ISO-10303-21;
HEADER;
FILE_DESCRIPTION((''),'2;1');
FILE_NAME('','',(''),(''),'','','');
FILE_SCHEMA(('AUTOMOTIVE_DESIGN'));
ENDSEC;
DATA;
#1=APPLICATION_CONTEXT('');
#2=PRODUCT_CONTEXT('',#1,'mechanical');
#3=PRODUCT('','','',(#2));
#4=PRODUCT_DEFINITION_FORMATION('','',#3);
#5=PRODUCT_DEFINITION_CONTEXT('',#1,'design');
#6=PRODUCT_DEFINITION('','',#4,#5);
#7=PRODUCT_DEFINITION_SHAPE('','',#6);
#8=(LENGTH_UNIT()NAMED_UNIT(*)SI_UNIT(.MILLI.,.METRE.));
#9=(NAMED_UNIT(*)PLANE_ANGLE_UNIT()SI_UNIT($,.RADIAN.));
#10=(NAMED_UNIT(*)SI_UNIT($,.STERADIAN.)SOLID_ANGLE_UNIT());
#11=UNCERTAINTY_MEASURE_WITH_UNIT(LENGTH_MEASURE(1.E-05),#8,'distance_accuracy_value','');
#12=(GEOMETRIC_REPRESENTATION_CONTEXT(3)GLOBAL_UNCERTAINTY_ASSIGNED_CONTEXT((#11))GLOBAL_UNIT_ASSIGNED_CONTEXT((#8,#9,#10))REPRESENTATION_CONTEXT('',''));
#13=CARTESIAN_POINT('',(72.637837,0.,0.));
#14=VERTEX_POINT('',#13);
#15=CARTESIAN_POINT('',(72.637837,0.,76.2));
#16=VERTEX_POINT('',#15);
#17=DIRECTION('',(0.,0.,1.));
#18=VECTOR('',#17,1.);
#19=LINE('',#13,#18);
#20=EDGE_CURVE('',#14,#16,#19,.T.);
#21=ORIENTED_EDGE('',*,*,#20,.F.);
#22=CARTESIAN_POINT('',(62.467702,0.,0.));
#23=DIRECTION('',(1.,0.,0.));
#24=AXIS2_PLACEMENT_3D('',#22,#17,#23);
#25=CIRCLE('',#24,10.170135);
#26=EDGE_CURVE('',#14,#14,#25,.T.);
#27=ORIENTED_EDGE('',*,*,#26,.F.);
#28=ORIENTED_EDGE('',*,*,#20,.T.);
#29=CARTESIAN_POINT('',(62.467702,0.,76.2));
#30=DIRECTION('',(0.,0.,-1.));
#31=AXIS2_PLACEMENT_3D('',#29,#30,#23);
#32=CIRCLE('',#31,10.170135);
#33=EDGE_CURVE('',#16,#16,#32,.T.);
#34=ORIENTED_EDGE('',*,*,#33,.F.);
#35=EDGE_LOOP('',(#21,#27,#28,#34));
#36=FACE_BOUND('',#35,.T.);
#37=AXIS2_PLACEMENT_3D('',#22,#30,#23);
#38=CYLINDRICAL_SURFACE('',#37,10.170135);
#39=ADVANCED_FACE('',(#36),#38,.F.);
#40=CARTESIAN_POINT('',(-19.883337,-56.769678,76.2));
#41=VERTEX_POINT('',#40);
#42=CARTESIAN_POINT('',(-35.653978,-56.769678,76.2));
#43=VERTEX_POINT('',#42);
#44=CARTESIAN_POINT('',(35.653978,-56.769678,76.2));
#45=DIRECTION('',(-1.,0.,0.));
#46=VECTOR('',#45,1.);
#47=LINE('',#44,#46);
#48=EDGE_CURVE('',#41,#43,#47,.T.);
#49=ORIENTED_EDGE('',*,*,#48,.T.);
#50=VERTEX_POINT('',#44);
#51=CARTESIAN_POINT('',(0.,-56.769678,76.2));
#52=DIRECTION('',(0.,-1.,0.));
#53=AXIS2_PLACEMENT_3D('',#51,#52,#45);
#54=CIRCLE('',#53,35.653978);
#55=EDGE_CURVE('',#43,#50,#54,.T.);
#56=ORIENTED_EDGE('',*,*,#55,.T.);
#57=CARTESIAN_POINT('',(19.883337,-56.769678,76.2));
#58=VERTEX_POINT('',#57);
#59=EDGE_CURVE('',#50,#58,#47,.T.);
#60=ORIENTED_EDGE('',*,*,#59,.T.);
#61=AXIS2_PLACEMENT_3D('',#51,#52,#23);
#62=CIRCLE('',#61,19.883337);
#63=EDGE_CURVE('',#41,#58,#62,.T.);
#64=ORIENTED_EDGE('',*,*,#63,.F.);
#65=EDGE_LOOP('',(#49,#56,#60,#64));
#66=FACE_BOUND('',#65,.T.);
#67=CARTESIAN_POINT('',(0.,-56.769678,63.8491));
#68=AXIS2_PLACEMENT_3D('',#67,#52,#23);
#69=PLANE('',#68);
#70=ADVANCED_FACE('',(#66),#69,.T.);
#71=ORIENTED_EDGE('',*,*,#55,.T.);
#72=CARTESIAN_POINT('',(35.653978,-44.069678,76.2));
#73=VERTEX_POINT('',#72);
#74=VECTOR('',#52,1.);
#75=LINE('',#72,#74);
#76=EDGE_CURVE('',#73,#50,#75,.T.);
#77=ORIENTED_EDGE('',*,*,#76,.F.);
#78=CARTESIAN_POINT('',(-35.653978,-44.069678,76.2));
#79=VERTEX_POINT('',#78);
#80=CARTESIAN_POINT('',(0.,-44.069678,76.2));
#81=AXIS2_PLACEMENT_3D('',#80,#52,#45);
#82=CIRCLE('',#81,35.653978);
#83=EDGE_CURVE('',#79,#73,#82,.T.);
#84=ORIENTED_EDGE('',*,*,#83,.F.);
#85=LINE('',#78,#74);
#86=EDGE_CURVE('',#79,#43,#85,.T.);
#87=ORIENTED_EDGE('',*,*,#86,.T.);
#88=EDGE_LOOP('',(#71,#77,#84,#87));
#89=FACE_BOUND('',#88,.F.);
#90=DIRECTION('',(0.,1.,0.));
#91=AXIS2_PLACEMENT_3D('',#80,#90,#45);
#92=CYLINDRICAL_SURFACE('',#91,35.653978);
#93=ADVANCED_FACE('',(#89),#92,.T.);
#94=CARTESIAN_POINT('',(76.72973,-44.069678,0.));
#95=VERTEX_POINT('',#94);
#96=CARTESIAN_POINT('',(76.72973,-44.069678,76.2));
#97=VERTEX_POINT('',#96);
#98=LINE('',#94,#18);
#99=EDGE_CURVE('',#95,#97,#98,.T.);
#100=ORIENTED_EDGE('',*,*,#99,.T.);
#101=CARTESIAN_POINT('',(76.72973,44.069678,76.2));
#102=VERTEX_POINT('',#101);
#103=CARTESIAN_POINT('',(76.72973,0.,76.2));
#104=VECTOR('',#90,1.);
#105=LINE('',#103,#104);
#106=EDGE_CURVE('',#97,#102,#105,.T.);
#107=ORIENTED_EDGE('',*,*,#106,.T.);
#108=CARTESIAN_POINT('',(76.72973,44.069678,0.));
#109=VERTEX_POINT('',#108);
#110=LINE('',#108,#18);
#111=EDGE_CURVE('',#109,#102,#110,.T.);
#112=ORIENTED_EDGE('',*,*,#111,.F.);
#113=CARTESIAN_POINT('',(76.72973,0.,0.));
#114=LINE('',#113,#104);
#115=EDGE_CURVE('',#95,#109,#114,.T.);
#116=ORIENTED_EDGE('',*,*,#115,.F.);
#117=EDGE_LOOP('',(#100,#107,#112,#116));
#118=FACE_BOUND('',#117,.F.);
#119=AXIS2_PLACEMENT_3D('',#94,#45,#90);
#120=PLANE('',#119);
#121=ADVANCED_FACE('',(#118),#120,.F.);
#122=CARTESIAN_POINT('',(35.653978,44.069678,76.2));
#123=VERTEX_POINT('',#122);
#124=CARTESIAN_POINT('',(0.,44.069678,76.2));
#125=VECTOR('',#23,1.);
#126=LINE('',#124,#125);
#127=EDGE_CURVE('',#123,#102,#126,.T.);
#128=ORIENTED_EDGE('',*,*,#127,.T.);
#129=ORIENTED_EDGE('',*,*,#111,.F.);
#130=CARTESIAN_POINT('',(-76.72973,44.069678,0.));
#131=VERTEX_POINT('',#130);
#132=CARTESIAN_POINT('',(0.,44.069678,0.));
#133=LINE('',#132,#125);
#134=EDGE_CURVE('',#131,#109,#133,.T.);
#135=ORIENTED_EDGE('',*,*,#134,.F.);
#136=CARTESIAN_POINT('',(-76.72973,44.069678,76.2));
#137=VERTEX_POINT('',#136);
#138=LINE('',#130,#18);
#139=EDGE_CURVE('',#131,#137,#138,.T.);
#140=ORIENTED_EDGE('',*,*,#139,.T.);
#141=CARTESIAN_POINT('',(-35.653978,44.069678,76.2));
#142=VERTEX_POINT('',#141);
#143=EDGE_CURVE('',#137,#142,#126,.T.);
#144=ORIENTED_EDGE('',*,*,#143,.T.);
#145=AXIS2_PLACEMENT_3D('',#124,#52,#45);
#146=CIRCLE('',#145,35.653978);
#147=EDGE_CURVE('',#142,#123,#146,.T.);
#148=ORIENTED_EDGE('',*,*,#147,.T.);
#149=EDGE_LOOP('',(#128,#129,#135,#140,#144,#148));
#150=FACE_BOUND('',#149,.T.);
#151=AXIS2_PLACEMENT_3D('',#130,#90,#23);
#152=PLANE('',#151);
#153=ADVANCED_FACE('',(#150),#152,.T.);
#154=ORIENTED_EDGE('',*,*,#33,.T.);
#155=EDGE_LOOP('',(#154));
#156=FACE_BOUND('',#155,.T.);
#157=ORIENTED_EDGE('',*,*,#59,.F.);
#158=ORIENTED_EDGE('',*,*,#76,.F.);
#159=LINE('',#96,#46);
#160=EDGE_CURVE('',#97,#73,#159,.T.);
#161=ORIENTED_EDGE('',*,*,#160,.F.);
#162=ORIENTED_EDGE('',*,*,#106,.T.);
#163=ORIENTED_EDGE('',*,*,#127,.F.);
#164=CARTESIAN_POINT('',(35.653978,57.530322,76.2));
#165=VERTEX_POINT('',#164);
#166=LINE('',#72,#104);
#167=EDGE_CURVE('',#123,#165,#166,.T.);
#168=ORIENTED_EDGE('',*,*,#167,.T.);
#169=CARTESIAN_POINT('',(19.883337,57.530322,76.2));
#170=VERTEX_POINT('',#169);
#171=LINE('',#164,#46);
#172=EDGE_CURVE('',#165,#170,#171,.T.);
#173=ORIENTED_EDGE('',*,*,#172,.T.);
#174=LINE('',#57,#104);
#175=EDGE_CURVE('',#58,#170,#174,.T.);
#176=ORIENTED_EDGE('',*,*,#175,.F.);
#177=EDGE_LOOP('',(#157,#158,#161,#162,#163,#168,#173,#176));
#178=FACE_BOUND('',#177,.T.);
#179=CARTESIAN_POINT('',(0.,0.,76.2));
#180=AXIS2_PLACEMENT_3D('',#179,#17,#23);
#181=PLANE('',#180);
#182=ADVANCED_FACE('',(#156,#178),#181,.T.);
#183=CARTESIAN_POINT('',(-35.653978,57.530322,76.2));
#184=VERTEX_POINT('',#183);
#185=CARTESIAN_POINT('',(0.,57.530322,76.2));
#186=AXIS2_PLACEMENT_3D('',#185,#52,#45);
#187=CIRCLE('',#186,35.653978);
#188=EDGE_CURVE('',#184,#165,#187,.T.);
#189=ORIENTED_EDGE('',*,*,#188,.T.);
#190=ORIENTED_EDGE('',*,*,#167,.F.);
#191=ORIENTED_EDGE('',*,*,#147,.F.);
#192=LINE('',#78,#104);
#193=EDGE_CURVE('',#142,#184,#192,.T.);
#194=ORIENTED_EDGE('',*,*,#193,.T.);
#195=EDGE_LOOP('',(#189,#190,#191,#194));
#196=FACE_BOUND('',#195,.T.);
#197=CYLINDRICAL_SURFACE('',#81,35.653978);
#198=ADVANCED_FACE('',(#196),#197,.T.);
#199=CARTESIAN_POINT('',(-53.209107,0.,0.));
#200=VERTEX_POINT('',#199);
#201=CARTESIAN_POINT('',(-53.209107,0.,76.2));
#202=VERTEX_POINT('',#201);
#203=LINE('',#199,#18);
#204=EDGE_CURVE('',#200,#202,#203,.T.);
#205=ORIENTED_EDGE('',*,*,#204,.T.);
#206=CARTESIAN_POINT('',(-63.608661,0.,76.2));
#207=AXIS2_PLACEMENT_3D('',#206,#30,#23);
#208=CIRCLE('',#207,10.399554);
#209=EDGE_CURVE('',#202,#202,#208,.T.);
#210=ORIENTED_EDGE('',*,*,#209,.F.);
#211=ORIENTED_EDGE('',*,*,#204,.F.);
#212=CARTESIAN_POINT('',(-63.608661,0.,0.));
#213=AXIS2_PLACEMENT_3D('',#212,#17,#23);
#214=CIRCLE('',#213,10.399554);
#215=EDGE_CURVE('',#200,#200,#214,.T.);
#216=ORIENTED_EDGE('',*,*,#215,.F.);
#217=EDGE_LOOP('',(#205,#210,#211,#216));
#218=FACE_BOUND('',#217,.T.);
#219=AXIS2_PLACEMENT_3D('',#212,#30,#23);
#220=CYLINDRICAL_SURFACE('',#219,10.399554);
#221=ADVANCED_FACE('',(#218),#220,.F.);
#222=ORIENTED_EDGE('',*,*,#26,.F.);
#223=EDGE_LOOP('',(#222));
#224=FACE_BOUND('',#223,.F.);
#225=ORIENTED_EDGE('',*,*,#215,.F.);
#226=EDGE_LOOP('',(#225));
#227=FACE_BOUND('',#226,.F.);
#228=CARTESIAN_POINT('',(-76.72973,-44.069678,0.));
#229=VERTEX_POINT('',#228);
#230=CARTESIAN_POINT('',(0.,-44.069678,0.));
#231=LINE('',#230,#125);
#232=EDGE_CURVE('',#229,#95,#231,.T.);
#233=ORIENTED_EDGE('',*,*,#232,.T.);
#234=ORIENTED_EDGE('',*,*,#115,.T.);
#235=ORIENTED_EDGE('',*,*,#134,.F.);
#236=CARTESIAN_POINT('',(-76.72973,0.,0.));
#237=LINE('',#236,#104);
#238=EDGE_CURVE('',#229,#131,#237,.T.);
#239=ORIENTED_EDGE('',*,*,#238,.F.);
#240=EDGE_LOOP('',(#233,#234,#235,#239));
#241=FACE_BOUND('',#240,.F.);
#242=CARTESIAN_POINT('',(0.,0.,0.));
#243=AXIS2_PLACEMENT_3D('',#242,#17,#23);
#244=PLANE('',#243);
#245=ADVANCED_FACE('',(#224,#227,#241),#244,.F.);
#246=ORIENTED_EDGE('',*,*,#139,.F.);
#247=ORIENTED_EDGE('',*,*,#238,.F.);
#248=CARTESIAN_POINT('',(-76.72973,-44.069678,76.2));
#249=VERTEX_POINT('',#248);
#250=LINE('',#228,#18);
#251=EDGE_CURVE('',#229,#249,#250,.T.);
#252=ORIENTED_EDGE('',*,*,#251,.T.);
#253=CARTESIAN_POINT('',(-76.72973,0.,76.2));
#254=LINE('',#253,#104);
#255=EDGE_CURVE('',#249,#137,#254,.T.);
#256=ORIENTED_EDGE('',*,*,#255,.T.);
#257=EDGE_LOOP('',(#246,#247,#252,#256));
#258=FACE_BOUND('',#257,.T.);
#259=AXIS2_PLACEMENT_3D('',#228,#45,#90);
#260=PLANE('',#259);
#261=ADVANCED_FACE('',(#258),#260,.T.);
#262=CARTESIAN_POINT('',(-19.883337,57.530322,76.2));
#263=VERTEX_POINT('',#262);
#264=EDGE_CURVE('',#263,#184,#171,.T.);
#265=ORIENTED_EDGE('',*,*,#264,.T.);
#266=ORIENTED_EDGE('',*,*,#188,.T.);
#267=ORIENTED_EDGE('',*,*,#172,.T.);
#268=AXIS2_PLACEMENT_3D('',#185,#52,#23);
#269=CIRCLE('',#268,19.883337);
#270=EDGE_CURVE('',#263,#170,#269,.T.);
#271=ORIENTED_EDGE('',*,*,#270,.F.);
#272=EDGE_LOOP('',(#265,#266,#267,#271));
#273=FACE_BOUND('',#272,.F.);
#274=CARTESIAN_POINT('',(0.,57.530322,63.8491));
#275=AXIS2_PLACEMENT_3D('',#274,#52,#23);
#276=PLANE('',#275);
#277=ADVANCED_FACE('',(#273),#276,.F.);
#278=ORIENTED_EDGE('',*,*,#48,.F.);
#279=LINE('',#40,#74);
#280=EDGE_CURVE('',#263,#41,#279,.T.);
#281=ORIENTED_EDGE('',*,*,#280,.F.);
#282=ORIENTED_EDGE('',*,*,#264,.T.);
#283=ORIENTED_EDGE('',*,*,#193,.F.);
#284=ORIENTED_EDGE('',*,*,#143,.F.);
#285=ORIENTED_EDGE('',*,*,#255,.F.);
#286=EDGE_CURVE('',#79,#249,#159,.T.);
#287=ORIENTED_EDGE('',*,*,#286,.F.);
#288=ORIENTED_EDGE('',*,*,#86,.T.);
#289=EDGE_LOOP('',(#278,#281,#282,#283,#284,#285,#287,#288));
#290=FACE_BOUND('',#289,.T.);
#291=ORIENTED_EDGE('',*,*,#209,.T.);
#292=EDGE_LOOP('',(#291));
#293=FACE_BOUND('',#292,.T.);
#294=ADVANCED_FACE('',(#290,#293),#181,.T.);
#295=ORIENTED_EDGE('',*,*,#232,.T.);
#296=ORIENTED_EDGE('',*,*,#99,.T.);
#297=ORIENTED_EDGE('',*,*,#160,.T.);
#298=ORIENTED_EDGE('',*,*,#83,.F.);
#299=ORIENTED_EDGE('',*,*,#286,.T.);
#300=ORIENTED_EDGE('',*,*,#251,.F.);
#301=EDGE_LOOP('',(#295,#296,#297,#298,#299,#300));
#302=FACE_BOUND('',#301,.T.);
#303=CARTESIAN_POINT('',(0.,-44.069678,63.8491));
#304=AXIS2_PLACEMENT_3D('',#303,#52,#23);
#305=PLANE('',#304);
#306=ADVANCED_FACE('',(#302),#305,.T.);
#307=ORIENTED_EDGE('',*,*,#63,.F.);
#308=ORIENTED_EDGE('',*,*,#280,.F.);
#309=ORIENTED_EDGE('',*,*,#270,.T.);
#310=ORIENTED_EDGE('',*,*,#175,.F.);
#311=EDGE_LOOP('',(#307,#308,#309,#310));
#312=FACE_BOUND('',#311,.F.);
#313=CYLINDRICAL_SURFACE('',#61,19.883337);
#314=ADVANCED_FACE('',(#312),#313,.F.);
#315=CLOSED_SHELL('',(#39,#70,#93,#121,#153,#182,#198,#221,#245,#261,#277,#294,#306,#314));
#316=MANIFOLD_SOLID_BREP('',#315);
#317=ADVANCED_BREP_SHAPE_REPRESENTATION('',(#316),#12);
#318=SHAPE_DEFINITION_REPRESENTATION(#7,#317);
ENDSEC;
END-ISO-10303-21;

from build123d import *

# Parameters (mm, degrees)
F0_W     = 153.4594595432
F0_H     = 88.1393551826
F2_DEPTH = 76.2
F1_R     = 10.1701349395
F1_R_2   = 10.3995540655
F3_DEPTH = 76.201
F5_DEPTH = 101.6
F7_DEPTH = 12.7
F9_DEPTH = 114.301


with BuildPart() as f2:
    # F0 (on Top) → F2 (new body)
    with BuildSketch(Plane.XY):
        Rectangle(F0_W, F0_H)
    extrude(amount=F2_DEPTH)

    # F1 (on face) → F3 (cut, through all)
    with BuildSketch(Plane.XY):
        with Locations((62.4677017331, 0)):
            Circle(F1_R)
        with Locations((-63.608661294, 0)):
            Circle(F1_R_2)
    extrude(amount=F3_DEPTH, mode=Mode.SUBTRACT)

    # F4 (on face) → F5 (join)
    with BuildSketch(Plane.XZ.offset(44.0696775913)):
        with BuildLine():
            ThreePointArc((-35.6539782969, 76.2), (0, 40.5460217031), (35.6539782969, 76.2))
            Line((35.6539782969, 76.2), (-35.6539782969, 76.2))
        make_face()
    extrude(amount=-F5_DEPTH)

    # F6 (on face) → F7 (join)
    with BuildSketch(Plane.XZ.offset(44.0696775913)):
        with BuildLine():
            ThreePointArc((-35.6539782969, 76.2), (0, 40.5460217031), (35.6539782969, 76.2))
            Line((35.6539782969, 76.2), (-35.6539782969, 76.2))
        make_face()
    extrude(amount=F7_DEPTH)

    # F8 (on face) → F9 (cut, through all)
    with BuildSketch(Plane.XZ.offset(56.7696775913)):
        with BuildLine():
            ThreePointArc((-19.8833374867, 76.2), (0, 56.3166625133), (19.8833374867, 76.2))
            Line((19.8833374867, 76.2), (-19.8833374867, 76.2))
        make_face()
        with BuildLine():
            Line((-19.8833374867, 76.2), (19.8833374867, 76.2))
            ThreePointArc((19.8833374867, 76.2), (0, 96.0833374867), (-19.8833374867, 76.2))
        make_face()
    extrude(amount=-F9_DEPTH, mode=Mode.SUBTRACT)


solid = f2.part
